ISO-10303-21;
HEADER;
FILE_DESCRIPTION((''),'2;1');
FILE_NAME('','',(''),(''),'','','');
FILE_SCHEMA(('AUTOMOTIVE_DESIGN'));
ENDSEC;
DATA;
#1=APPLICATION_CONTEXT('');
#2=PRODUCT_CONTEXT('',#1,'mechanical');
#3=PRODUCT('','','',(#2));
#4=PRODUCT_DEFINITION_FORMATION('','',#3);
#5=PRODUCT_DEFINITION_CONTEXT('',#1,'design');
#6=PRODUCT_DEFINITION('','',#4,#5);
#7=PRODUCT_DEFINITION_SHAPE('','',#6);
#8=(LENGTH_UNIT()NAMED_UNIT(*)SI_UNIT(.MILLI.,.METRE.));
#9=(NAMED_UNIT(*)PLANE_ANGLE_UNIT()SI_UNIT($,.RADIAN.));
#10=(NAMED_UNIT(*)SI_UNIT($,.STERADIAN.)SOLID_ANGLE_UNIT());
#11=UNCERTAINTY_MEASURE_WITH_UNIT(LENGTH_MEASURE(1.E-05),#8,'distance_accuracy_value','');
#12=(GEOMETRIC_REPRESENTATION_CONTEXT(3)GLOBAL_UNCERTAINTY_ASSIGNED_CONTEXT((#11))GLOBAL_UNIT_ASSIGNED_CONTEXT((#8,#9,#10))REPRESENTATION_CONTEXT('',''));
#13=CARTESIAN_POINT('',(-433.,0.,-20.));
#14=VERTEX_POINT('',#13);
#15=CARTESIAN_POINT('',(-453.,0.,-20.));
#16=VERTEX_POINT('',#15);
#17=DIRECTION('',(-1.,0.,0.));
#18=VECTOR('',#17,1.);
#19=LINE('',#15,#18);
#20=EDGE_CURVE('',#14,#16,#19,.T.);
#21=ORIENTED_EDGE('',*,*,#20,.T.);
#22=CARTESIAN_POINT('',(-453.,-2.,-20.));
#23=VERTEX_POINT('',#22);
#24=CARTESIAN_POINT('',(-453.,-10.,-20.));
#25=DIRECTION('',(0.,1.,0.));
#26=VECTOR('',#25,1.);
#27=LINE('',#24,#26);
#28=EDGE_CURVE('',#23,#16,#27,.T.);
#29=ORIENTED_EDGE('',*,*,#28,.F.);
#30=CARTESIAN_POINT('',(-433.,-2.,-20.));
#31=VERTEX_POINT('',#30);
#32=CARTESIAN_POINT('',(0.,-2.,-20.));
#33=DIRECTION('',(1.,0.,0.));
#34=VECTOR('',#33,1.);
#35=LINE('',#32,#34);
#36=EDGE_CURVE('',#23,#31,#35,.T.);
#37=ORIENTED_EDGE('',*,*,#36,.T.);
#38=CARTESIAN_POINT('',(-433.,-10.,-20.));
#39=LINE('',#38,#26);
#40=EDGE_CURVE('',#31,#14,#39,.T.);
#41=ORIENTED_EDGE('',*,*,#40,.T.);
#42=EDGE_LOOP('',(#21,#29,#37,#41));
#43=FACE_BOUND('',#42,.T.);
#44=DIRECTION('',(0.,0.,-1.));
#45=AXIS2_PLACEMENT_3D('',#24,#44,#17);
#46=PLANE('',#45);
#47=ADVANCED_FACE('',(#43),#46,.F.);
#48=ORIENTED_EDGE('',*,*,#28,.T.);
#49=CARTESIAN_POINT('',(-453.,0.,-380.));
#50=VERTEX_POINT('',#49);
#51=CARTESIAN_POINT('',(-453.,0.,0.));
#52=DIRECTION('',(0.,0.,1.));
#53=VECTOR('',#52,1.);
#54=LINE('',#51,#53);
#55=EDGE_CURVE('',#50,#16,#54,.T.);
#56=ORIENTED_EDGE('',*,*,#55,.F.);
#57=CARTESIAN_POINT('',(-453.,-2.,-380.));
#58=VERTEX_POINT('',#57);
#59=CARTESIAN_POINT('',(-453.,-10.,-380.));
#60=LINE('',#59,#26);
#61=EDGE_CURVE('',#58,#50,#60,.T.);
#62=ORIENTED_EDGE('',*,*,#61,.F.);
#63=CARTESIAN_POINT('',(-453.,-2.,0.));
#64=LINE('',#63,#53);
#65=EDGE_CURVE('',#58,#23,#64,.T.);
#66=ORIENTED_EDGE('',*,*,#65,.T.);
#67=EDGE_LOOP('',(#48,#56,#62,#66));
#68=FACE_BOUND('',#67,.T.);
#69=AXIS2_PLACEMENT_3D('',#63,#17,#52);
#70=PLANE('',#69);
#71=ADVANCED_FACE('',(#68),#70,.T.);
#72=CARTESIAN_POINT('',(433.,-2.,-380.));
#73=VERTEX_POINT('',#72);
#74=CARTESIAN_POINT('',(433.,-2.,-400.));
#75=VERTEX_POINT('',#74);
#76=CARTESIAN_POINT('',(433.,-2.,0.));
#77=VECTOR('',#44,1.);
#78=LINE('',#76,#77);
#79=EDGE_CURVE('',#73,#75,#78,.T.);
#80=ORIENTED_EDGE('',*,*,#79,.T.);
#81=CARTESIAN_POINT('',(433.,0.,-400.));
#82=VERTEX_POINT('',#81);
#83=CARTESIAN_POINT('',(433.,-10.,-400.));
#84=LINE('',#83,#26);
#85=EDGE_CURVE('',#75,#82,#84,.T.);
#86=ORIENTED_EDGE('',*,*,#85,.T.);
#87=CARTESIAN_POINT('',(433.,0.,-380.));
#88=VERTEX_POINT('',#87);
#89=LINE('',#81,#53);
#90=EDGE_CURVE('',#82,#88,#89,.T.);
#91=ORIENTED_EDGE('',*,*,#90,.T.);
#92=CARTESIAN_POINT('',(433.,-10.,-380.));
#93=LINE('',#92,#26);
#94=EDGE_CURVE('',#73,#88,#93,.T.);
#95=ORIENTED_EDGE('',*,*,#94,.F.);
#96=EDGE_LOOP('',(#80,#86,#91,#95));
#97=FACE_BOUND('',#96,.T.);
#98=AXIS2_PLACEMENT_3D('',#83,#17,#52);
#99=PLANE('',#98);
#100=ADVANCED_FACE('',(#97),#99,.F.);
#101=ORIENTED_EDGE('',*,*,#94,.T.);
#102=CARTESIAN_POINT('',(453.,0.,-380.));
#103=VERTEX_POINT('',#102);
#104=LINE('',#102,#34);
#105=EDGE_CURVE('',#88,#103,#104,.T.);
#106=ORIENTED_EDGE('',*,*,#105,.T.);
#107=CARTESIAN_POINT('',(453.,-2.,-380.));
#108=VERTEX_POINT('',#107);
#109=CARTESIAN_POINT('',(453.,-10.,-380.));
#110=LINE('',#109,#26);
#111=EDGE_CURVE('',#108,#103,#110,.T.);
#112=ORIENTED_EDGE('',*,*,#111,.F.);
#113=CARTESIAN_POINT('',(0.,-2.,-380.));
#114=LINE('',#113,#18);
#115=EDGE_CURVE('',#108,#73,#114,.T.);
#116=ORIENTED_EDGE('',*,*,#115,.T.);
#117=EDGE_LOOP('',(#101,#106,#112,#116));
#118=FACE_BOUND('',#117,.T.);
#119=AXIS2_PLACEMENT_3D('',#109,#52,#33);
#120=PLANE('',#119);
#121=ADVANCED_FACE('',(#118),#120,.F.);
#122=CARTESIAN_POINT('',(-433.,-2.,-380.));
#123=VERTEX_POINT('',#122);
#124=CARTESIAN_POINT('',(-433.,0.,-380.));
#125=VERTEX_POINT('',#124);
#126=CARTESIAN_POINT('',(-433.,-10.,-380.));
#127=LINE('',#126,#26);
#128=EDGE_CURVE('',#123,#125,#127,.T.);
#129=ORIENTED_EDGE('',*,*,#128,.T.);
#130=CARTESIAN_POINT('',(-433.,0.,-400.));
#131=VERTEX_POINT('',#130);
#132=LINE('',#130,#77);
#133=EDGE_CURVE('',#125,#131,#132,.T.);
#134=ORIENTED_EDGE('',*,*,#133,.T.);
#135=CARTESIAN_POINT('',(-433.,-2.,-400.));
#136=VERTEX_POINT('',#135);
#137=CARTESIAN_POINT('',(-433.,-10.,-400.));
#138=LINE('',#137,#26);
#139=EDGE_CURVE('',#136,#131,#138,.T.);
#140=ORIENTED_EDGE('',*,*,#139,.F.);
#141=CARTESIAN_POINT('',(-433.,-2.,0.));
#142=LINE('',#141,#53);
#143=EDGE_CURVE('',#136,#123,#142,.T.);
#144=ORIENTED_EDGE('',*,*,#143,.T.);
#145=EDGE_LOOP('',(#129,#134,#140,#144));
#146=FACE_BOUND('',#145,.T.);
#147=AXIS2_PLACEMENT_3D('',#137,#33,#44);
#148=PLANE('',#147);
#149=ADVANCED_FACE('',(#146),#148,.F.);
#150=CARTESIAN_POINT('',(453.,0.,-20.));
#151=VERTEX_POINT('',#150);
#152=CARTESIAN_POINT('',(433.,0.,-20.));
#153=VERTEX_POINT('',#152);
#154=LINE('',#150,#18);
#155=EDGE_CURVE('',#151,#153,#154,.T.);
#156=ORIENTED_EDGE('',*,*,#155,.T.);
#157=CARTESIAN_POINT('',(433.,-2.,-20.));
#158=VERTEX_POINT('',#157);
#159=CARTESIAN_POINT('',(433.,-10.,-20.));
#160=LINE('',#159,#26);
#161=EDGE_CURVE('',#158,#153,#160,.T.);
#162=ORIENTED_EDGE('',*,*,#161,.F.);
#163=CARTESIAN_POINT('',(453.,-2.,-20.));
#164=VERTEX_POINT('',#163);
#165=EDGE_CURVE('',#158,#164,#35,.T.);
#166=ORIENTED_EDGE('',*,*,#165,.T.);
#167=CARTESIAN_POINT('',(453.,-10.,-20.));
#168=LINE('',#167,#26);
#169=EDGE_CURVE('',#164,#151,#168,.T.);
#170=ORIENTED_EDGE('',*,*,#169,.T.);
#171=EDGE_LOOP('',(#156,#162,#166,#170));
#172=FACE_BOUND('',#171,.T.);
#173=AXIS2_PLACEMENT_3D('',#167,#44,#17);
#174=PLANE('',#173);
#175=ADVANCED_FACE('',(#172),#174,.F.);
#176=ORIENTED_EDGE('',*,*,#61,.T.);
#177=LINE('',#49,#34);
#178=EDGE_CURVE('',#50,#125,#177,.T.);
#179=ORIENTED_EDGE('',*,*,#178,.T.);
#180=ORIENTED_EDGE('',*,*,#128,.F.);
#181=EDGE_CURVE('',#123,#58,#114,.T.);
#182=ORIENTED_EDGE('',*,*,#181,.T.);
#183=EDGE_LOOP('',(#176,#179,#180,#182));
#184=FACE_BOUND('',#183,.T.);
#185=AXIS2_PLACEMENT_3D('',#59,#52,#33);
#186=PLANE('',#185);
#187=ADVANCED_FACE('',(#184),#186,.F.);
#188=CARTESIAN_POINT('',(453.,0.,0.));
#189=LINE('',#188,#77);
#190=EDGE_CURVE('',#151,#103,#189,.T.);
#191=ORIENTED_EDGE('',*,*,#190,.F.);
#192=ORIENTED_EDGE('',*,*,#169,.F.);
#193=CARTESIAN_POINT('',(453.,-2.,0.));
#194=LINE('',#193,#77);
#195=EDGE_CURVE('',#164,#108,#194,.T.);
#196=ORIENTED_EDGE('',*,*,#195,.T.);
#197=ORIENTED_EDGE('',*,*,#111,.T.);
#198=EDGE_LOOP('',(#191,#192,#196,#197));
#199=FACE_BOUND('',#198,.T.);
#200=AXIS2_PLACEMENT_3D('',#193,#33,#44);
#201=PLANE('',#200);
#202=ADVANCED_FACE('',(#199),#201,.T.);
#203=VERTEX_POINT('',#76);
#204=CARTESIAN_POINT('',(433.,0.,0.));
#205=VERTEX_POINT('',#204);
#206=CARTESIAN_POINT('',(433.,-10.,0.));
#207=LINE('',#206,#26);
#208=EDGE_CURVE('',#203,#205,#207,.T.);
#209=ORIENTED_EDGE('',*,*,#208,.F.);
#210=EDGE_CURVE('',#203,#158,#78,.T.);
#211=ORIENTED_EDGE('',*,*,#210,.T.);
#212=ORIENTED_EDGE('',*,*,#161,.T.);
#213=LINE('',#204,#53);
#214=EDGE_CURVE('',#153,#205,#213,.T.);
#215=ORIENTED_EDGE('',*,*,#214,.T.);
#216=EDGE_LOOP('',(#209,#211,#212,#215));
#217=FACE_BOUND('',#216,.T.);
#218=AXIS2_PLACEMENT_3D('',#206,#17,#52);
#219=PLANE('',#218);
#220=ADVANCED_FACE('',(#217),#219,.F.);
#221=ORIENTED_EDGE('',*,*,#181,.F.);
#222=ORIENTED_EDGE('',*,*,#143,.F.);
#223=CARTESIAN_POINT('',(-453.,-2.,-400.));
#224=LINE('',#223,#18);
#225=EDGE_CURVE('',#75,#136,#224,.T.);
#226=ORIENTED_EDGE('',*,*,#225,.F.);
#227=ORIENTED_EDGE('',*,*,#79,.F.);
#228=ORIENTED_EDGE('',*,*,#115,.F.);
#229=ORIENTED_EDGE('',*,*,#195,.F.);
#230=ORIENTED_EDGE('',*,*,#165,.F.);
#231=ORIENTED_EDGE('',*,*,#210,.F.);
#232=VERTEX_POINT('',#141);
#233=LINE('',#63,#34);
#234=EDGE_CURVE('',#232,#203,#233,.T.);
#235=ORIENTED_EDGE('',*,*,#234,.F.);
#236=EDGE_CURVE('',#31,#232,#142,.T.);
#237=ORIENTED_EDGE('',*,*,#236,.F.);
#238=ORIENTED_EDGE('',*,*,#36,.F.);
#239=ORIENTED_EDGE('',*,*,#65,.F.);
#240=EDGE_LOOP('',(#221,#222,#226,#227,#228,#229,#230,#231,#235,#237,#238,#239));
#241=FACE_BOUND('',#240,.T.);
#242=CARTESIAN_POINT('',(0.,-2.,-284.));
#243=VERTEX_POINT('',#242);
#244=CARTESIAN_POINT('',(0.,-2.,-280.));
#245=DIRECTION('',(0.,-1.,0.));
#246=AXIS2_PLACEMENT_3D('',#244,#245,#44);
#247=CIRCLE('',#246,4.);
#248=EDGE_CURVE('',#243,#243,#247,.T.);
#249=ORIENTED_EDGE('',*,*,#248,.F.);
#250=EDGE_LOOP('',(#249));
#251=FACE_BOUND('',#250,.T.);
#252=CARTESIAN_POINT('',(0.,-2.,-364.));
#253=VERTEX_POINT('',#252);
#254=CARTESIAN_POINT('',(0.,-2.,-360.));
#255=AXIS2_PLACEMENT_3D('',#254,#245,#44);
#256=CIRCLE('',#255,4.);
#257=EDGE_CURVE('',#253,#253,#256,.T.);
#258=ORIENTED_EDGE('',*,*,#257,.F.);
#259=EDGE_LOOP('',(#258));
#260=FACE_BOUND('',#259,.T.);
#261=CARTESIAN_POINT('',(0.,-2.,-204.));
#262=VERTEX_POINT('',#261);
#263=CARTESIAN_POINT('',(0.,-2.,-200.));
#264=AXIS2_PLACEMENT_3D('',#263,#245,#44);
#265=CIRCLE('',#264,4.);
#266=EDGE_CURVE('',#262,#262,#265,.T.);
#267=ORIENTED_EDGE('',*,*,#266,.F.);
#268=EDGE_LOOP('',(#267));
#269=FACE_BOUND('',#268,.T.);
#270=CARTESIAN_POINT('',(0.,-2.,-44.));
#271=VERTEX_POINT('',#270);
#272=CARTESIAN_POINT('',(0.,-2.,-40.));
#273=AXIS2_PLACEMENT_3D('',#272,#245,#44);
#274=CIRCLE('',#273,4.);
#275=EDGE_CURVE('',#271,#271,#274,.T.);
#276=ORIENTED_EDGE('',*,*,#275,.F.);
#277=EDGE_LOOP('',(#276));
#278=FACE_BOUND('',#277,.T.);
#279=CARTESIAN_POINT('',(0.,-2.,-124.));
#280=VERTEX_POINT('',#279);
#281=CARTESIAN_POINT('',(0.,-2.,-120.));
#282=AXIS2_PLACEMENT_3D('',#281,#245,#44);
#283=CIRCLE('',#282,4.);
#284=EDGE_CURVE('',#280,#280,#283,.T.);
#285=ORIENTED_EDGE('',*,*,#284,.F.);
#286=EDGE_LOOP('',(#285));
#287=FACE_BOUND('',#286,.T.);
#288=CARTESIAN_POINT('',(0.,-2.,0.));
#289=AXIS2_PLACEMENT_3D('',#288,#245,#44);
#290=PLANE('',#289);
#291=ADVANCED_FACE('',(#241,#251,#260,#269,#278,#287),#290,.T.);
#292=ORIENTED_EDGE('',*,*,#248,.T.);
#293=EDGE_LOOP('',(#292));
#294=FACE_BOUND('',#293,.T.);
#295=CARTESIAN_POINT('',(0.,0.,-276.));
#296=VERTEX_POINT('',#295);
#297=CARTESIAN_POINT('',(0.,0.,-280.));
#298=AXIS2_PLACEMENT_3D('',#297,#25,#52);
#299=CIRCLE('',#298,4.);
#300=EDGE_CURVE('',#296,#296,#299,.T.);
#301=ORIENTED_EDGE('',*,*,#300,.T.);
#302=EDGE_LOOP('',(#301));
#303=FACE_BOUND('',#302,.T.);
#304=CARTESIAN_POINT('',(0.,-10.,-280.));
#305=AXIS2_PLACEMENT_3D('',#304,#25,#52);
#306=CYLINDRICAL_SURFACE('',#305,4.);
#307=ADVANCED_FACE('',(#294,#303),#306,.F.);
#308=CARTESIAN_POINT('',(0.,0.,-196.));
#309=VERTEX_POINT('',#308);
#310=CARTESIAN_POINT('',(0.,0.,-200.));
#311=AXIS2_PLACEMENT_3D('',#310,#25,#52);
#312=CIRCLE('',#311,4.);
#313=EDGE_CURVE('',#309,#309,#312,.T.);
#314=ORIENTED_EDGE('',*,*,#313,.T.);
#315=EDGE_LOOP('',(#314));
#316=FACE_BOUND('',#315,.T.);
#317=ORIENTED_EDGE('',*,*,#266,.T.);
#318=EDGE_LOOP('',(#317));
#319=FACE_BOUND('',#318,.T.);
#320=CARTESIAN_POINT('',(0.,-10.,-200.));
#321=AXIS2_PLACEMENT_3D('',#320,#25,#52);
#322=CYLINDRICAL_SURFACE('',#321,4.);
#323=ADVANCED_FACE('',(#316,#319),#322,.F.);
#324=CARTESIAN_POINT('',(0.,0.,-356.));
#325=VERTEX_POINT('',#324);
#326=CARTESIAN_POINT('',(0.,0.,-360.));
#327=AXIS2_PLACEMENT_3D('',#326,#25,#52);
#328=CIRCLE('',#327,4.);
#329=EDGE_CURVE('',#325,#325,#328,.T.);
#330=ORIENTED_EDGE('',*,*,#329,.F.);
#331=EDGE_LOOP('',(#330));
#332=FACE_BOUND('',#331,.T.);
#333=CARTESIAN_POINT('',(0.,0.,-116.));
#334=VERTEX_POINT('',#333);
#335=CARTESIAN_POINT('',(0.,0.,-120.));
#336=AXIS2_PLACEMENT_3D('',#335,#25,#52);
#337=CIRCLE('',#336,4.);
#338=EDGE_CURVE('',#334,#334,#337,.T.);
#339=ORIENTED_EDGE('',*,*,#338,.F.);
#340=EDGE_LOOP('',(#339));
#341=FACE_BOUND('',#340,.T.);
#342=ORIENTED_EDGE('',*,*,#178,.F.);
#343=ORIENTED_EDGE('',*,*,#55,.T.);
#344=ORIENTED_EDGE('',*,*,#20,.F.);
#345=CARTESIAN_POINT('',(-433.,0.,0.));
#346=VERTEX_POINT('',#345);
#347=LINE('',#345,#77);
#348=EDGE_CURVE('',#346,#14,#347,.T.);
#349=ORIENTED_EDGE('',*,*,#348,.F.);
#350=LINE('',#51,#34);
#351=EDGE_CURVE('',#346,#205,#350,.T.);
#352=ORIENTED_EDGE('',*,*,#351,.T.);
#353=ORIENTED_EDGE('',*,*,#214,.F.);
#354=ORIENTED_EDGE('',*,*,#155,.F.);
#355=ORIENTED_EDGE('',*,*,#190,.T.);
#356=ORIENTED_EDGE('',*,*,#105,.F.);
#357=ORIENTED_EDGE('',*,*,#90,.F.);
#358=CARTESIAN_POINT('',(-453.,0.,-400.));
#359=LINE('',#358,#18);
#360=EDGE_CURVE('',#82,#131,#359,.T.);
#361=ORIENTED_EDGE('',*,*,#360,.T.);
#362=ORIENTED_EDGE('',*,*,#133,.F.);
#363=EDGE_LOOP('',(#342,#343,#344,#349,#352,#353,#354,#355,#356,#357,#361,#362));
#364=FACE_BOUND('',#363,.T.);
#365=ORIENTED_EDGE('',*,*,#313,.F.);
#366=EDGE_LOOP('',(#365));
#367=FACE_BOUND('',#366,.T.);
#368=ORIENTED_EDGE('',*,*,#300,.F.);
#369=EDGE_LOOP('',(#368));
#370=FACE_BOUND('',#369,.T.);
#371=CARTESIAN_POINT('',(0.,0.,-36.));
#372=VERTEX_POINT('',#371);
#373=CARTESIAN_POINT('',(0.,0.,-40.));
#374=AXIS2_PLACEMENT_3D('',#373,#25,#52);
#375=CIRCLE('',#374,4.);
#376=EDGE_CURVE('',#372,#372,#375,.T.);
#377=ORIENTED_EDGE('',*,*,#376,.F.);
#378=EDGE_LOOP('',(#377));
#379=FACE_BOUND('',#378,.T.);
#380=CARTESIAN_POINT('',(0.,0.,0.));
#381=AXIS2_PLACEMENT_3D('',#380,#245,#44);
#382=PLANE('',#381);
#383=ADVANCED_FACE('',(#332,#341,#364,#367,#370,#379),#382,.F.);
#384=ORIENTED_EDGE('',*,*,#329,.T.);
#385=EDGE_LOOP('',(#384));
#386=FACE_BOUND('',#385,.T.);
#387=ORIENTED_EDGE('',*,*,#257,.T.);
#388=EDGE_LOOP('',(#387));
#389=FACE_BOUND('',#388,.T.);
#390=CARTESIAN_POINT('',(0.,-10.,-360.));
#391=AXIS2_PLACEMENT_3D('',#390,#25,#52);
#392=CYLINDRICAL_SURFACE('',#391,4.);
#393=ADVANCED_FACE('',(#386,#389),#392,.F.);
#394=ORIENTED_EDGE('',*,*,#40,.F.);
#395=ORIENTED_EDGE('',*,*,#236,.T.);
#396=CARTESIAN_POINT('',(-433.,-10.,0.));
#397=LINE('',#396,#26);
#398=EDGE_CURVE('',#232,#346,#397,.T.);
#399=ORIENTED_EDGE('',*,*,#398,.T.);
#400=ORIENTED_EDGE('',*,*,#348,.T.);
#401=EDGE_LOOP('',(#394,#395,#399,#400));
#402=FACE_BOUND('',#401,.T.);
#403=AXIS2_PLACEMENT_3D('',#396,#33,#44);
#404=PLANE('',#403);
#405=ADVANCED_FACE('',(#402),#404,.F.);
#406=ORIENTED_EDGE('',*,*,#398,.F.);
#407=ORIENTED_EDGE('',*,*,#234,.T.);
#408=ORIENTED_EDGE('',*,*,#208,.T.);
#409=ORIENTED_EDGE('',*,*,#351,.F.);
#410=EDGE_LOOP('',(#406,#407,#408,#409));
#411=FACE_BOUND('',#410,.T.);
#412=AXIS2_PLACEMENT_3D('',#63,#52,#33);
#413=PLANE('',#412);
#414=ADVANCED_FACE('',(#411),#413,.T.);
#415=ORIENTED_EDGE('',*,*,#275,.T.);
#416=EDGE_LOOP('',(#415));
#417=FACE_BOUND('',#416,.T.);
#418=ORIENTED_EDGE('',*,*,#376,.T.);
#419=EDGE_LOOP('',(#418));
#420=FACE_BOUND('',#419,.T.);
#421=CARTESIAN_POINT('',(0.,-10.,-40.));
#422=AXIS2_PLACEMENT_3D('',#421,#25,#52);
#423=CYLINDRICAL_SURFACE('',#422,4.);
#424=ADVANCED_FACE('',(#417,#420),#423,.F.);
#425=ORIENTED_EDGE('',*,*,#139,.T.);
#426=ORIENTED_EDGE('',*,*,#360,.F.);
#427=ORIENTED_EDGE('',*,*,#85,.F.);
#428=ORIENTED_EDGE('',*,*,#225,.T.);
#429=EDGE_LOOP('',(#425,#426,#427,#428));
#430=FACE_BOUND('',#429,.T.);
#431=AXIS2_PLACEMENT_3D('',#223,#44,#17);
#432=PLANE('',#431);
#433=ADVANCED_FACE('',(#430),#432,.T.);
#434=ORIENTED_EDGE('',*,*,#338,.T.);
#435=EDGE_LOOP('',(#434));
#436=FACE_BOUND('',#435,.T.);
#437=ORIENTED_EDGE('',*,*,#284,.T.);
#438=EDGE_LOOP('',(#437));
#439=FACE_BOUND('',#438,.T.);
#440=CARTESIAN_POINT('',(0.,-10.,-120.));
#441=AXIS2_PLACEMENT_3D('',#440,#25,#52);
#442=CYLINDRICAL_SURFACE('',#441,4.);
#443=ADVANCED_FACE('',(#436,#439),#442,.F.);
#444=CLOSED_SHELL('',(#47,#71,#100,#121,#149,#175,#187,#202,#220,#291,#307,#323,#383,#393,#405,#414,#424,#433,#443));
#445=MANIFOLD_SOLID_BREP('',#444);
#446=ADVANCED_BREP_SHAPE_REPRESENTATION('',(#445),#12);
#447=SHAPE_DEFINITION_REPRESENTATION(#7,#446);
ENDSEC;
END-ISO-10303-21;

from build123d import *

# Parameters (mm, degrees)
SKETCH2_W          = 906
SKETCH2_H          = 400
BASE_FLANGE1_DEPTH = 2
SKETCH7_W          = 20
SKETCH7_H          = 20
CUT_EXTRUDE1_DEPTH = 10
SKETCH8_R          = 4
CUT_EXTRUDE2_DEPTH = 10


# Sheet-metal steps are written as plain solids
with BuildPart() as part:
    # Sketch2 → Base-Flange1 (new body)
    with BuildSketch(Plane(origin=(0, 0, 0), x_dir=(1, 0, 0), z_dir=(0, 1, 0))):
        with Locations((0, 200)):
            Rectangle(SKETCH2_W, SKETCH2_H)
    extrude(amount=-BASE_FLANGE1_DEPTH)

    # Sketch7 → Cut-Extrude1 (cut)
    with BuildSketch(Plane(origin=(0, 0, 0), x_dir=(1, 0, 0), z_dir=(0, 1, 0))):
        with Locations((-443, 390)):
            Rectangle(SKETCH7_W, SKETCH7_H)
        with Locations((-443, 10)):
            Rectangle(SKETCH7_W, SKETCH7_H)
        with Locations((443, 10)):
            Rectangle(SKETCH7_W, SKETCH7_H)
        with Locations((443, 390)):
            Rectangle(SKETCH7_W, SKETCH7_H)
    extrude(amount=-CUT_EXTRUDE1_DEPTH, mode=Mode.SUBTRACT)

    # Sketch8 → Cut-Extrude2 (cut)
    with BuildSketch(Plane(origin=(0, 0, 0), x_dir=(1, 0, 0), z_dir=(0, 1, 0))):
        with Locations(Location((0, 360, 0), (0, 0, 270))):
            Circle(SKETCH8_R)
        with Locations(Location((0, 280, 0), (0, 0, 270))):
            Circle(SKETCH8_R)
        with Locations(Location((0, 200, 0), (0, 0, 270))):
            Circle(SKETCH8_R)
        with Locations(Location((0, 120, 0), (0, 0, 270))):
            Circle(SKETCH8_R)
        with Locations(Location((0, 40, 0), (0, 0, 270))):
            Circle(SKETCH8_R)
    extrude(amount=-CUT_EXTRUDE2_DEPTH, mode=Mode.SUBTRACT)


solid = part.part
